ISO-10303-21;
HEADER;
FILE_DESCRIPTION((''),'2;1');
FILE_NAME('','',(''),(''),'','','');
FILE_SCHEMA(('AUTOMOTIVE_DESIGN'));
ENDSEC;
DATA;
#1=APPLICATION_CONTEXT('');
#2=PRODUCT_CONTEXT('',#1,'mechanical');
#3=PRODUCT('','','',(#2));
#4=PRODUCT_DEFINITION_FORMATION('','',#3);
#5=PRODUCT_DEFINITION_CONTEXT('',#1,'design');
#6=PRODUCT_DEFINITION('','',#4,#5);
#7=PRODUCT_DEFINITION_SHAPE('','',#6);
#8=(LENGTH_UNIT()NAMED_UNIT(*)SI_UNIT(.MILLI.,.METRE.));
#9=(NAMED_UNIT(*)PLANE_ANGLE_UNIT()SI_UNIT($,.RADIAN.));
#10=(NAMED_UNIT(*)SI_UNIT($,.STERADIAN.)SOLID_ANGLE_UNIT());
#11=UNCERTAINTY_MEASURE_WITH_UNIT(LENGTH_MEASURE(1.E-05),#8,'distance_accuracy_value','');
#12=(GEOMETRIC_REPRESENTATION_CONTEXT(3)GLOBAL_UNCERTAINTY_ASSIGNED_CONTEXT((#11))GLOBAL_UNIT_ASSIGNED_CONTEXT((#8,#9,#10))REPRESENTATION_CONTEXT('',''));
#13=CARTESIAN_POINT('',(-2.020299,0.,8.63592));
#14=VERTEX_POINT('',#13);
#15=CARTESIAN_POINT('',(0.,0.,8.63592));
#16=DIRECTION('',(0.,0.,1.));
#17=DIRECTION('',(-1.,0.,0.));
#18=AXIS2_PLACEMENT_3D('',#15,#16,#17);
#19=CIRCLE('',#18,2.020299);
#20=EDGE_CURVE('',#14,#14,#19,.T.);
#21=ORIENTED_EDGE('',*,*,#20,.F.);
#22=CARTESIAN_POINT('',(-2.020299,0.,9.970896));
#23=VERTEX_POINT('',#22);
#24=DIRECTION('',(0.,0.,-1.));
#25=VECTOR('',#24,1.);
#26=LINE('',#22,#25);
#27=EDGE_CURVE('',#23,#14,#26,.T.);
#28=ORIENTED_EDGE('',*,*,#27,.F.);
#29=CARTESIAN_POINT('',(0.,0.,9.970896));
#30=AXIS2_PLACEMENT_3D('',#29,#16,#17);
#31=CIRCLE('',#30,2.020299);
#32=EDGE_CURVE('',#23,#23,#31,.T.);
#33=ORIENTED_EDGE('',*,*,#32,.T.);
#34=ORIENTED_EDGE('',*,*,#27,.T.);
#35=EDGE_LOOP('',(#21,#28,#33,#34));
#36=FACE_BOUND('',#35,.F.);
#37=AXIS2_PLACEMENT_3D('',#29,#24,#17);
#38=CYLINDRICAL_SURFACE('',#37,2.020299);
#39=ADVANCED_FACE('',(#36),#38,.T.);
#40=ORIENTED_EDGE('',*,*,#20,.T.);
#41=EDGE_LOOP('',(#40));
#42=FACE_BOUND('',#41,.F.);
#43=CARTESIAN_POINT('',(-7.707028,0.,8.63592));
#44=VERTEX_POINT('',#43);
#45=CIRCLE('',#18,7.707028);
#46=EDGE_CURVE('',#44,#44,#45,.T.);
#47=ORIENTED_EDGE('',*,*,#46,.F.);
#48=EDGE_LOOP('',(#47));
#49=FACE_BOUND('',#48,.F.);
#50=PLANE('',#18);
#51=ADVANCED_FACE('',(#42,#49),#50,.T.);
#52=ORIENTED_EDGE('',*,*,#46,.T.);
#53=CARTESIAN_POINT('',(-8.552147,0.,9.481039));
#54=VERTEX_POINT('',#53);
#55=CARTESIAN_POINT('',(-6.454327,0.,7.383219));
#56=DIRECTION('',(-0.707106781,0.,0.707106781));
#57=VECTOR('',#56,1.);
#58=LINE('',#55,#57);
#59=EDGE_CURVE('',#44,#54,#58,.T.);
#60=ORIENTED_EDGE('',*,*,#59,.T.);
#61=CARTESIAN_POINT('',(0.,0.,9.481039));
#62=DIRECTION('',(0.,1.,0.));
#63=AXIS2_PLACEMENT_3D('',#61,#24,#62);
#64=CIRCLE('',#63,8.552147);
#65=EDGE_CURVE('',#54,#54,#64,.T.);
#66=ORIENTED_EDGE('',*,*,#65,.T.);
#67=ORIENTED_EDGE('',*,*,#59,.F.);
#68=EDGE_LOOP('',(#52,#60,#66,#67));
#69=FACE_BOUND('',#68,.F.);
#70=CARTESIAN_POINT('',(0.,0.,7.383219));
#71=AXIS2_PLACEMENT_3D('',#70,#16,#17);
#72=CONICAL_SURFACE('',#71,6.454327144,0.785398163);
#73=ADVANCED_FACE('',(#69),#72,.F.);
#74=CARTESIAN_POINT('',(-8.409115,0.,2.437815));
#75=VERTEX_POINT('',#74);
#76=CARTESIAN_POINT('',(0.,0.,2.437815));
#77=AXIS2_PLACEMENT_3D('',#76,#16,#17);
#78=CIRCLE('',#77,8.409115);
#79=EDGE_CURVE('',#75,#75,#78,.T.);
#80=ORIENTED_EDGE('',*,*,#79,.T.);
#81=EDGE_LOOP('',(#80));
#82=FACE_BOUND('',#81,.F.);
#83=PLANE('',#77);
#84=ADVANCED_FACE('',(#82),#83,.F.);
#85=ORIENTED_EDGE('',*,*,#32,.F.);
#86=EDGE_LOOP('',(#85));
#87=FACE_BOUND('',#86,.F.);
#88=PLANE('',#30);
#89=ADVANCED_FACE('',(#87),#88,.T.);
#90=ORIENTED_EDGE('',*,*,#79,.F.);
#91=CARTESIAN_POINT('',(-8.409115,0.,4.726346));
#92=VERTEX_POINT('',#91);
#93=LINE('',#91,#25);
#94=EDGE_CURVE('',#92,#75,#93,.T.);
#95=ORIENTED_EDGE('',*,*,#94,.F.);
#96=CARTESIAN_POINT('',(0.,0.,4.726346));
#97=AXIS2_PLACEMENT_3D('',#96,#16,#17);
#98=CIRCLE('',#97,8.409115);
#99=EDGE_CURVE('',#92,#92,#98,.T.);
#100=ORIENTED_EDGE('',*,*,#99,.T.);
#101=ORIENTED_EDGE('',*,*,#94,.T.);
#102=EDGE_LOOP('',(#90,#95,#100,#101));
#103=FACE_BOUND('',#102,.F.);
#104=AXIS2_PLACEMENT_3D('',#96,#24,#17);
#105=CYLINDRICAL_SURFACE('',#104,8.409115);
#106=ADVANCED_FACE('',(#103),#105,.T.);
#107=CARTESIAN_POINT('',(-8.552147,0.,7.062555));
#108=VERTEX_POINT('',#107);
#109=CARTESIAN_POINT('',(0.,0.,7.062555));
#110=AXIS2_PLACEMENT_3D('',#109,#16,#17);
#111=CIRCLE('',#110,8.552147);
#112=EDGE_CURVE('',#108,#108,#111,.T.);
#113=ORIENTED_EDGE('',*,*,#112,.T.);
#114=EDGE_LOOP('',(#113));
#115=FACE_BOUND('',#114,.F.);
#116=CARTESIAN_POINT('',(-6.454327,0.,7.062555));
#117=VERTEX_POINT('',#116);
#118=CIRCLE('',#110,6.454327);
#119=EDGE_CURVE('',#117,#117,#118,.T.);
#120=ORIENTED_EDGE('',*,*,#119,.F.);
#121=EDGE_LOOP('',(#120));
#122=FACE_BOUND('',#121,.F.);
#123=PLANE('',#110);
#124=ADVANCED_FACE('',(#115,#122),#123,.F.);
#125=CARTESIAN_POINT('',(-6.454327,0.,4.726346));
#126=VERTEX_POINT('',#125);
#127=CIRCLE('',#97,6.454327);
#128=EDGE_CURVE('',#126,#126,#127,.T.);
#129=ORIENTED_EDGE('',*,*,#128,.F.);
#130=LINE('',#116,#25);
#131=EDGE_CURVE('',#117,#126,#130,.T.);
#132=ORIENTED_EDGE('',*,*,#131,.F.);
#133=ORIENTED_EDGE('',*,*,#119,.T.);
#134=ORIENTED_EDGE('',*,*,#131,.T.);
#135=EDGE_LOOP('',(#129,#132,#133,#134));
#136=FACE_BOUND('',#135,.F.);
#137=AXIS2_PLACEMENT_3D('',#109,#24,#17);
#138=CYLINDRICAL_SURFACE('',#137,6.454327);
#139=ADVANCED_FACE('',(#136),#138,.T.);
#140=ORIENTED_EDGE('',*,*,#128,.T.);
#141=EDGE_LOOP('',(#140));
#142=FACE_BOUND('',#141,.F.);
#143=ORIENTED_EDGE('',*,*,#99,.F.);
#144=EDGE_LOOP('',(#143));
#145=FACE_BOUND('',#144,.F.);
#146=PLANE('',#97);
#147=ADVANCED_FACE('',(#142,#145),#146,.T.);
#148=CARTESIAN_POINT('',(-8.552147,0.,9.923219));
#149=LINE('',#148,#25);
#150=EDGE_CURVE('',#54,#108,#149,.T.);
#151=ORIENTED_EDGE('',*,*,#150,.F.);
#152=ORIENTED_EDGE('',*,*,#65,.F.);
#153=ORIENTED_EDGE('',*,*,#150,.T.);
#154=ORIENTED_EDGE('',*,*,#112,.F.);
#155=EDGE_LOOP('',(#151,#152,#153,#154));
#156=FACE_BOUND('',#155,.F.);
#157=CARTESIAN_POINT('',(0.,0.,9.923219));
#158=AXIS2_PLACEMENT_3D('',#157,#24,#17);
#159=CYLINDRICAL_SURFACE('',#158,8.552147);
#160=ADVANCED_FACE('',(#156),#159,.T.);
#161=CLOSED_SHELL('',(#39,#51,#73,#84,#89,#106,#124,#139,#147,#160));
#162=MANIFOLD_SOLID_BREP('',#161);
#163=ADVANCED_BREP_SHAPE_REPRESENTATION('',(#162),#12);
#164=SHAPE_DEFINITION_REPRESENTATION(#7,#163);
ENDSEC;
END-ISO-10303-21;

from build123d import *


# Not quite as in the source:
# - a fillet or chamfer that OpenCascade refuses, or shapes differently, is made with other operations: its cross-section is extruded or revolved along the edge and cut away or added


with BuildPart() as f1:
    # F0 (on Front) → F1 (revolve)
    with BuildSketch(Plane.XZ):
        Polygon((0, 2.4378150702), (0, 2.7715591714), (0, 9.970895946), (-2.0202985033, 9.970895946), (-2.0202985033, 8.6359195411), (-6.4543271437, 8.6359195411), (-6.4543271437, 9.9232187495), (-8.5521470755, 9.9232187495), (-8.5521470755, 7.0625548251), (-6.4543271437, 7.0625548251), (-6.4543271437, 4.7263461165), (-8.4091145545, 4.7263461165), (-8.4091145545, 2.4378150702), align=None)
    revolve(axis=Axis((0, 0, 6.3712275587), (0, 0, 1)))

    # F2: chamfer of 2.54 on 1 edges, made by hand


with BuildPart() as f2_tool2:
    # F2_s3 → F2_t4 (revolve)
    with BuildSketch(Plane.XZ):
        Polygon((-6.4543271437, 7.3832187495), (-8.9943271437, 9.9232187495), (-6.4543271437, 9.9232187495), align=None)
    revolve(axis=Axis((0, 0, 9.9232187495), (0, 0, 1)))

    split(bisect_by=Plane.XY.offset(8.6359195411), keep=Keep.TOP)


with BuildPart() as f1_1:
    add(f1.part)

    # F2_t1: cut F2_tool2
    add(f2_tool2.part, mode=Mode.SUBTRACT)


solid = f1_1.part
